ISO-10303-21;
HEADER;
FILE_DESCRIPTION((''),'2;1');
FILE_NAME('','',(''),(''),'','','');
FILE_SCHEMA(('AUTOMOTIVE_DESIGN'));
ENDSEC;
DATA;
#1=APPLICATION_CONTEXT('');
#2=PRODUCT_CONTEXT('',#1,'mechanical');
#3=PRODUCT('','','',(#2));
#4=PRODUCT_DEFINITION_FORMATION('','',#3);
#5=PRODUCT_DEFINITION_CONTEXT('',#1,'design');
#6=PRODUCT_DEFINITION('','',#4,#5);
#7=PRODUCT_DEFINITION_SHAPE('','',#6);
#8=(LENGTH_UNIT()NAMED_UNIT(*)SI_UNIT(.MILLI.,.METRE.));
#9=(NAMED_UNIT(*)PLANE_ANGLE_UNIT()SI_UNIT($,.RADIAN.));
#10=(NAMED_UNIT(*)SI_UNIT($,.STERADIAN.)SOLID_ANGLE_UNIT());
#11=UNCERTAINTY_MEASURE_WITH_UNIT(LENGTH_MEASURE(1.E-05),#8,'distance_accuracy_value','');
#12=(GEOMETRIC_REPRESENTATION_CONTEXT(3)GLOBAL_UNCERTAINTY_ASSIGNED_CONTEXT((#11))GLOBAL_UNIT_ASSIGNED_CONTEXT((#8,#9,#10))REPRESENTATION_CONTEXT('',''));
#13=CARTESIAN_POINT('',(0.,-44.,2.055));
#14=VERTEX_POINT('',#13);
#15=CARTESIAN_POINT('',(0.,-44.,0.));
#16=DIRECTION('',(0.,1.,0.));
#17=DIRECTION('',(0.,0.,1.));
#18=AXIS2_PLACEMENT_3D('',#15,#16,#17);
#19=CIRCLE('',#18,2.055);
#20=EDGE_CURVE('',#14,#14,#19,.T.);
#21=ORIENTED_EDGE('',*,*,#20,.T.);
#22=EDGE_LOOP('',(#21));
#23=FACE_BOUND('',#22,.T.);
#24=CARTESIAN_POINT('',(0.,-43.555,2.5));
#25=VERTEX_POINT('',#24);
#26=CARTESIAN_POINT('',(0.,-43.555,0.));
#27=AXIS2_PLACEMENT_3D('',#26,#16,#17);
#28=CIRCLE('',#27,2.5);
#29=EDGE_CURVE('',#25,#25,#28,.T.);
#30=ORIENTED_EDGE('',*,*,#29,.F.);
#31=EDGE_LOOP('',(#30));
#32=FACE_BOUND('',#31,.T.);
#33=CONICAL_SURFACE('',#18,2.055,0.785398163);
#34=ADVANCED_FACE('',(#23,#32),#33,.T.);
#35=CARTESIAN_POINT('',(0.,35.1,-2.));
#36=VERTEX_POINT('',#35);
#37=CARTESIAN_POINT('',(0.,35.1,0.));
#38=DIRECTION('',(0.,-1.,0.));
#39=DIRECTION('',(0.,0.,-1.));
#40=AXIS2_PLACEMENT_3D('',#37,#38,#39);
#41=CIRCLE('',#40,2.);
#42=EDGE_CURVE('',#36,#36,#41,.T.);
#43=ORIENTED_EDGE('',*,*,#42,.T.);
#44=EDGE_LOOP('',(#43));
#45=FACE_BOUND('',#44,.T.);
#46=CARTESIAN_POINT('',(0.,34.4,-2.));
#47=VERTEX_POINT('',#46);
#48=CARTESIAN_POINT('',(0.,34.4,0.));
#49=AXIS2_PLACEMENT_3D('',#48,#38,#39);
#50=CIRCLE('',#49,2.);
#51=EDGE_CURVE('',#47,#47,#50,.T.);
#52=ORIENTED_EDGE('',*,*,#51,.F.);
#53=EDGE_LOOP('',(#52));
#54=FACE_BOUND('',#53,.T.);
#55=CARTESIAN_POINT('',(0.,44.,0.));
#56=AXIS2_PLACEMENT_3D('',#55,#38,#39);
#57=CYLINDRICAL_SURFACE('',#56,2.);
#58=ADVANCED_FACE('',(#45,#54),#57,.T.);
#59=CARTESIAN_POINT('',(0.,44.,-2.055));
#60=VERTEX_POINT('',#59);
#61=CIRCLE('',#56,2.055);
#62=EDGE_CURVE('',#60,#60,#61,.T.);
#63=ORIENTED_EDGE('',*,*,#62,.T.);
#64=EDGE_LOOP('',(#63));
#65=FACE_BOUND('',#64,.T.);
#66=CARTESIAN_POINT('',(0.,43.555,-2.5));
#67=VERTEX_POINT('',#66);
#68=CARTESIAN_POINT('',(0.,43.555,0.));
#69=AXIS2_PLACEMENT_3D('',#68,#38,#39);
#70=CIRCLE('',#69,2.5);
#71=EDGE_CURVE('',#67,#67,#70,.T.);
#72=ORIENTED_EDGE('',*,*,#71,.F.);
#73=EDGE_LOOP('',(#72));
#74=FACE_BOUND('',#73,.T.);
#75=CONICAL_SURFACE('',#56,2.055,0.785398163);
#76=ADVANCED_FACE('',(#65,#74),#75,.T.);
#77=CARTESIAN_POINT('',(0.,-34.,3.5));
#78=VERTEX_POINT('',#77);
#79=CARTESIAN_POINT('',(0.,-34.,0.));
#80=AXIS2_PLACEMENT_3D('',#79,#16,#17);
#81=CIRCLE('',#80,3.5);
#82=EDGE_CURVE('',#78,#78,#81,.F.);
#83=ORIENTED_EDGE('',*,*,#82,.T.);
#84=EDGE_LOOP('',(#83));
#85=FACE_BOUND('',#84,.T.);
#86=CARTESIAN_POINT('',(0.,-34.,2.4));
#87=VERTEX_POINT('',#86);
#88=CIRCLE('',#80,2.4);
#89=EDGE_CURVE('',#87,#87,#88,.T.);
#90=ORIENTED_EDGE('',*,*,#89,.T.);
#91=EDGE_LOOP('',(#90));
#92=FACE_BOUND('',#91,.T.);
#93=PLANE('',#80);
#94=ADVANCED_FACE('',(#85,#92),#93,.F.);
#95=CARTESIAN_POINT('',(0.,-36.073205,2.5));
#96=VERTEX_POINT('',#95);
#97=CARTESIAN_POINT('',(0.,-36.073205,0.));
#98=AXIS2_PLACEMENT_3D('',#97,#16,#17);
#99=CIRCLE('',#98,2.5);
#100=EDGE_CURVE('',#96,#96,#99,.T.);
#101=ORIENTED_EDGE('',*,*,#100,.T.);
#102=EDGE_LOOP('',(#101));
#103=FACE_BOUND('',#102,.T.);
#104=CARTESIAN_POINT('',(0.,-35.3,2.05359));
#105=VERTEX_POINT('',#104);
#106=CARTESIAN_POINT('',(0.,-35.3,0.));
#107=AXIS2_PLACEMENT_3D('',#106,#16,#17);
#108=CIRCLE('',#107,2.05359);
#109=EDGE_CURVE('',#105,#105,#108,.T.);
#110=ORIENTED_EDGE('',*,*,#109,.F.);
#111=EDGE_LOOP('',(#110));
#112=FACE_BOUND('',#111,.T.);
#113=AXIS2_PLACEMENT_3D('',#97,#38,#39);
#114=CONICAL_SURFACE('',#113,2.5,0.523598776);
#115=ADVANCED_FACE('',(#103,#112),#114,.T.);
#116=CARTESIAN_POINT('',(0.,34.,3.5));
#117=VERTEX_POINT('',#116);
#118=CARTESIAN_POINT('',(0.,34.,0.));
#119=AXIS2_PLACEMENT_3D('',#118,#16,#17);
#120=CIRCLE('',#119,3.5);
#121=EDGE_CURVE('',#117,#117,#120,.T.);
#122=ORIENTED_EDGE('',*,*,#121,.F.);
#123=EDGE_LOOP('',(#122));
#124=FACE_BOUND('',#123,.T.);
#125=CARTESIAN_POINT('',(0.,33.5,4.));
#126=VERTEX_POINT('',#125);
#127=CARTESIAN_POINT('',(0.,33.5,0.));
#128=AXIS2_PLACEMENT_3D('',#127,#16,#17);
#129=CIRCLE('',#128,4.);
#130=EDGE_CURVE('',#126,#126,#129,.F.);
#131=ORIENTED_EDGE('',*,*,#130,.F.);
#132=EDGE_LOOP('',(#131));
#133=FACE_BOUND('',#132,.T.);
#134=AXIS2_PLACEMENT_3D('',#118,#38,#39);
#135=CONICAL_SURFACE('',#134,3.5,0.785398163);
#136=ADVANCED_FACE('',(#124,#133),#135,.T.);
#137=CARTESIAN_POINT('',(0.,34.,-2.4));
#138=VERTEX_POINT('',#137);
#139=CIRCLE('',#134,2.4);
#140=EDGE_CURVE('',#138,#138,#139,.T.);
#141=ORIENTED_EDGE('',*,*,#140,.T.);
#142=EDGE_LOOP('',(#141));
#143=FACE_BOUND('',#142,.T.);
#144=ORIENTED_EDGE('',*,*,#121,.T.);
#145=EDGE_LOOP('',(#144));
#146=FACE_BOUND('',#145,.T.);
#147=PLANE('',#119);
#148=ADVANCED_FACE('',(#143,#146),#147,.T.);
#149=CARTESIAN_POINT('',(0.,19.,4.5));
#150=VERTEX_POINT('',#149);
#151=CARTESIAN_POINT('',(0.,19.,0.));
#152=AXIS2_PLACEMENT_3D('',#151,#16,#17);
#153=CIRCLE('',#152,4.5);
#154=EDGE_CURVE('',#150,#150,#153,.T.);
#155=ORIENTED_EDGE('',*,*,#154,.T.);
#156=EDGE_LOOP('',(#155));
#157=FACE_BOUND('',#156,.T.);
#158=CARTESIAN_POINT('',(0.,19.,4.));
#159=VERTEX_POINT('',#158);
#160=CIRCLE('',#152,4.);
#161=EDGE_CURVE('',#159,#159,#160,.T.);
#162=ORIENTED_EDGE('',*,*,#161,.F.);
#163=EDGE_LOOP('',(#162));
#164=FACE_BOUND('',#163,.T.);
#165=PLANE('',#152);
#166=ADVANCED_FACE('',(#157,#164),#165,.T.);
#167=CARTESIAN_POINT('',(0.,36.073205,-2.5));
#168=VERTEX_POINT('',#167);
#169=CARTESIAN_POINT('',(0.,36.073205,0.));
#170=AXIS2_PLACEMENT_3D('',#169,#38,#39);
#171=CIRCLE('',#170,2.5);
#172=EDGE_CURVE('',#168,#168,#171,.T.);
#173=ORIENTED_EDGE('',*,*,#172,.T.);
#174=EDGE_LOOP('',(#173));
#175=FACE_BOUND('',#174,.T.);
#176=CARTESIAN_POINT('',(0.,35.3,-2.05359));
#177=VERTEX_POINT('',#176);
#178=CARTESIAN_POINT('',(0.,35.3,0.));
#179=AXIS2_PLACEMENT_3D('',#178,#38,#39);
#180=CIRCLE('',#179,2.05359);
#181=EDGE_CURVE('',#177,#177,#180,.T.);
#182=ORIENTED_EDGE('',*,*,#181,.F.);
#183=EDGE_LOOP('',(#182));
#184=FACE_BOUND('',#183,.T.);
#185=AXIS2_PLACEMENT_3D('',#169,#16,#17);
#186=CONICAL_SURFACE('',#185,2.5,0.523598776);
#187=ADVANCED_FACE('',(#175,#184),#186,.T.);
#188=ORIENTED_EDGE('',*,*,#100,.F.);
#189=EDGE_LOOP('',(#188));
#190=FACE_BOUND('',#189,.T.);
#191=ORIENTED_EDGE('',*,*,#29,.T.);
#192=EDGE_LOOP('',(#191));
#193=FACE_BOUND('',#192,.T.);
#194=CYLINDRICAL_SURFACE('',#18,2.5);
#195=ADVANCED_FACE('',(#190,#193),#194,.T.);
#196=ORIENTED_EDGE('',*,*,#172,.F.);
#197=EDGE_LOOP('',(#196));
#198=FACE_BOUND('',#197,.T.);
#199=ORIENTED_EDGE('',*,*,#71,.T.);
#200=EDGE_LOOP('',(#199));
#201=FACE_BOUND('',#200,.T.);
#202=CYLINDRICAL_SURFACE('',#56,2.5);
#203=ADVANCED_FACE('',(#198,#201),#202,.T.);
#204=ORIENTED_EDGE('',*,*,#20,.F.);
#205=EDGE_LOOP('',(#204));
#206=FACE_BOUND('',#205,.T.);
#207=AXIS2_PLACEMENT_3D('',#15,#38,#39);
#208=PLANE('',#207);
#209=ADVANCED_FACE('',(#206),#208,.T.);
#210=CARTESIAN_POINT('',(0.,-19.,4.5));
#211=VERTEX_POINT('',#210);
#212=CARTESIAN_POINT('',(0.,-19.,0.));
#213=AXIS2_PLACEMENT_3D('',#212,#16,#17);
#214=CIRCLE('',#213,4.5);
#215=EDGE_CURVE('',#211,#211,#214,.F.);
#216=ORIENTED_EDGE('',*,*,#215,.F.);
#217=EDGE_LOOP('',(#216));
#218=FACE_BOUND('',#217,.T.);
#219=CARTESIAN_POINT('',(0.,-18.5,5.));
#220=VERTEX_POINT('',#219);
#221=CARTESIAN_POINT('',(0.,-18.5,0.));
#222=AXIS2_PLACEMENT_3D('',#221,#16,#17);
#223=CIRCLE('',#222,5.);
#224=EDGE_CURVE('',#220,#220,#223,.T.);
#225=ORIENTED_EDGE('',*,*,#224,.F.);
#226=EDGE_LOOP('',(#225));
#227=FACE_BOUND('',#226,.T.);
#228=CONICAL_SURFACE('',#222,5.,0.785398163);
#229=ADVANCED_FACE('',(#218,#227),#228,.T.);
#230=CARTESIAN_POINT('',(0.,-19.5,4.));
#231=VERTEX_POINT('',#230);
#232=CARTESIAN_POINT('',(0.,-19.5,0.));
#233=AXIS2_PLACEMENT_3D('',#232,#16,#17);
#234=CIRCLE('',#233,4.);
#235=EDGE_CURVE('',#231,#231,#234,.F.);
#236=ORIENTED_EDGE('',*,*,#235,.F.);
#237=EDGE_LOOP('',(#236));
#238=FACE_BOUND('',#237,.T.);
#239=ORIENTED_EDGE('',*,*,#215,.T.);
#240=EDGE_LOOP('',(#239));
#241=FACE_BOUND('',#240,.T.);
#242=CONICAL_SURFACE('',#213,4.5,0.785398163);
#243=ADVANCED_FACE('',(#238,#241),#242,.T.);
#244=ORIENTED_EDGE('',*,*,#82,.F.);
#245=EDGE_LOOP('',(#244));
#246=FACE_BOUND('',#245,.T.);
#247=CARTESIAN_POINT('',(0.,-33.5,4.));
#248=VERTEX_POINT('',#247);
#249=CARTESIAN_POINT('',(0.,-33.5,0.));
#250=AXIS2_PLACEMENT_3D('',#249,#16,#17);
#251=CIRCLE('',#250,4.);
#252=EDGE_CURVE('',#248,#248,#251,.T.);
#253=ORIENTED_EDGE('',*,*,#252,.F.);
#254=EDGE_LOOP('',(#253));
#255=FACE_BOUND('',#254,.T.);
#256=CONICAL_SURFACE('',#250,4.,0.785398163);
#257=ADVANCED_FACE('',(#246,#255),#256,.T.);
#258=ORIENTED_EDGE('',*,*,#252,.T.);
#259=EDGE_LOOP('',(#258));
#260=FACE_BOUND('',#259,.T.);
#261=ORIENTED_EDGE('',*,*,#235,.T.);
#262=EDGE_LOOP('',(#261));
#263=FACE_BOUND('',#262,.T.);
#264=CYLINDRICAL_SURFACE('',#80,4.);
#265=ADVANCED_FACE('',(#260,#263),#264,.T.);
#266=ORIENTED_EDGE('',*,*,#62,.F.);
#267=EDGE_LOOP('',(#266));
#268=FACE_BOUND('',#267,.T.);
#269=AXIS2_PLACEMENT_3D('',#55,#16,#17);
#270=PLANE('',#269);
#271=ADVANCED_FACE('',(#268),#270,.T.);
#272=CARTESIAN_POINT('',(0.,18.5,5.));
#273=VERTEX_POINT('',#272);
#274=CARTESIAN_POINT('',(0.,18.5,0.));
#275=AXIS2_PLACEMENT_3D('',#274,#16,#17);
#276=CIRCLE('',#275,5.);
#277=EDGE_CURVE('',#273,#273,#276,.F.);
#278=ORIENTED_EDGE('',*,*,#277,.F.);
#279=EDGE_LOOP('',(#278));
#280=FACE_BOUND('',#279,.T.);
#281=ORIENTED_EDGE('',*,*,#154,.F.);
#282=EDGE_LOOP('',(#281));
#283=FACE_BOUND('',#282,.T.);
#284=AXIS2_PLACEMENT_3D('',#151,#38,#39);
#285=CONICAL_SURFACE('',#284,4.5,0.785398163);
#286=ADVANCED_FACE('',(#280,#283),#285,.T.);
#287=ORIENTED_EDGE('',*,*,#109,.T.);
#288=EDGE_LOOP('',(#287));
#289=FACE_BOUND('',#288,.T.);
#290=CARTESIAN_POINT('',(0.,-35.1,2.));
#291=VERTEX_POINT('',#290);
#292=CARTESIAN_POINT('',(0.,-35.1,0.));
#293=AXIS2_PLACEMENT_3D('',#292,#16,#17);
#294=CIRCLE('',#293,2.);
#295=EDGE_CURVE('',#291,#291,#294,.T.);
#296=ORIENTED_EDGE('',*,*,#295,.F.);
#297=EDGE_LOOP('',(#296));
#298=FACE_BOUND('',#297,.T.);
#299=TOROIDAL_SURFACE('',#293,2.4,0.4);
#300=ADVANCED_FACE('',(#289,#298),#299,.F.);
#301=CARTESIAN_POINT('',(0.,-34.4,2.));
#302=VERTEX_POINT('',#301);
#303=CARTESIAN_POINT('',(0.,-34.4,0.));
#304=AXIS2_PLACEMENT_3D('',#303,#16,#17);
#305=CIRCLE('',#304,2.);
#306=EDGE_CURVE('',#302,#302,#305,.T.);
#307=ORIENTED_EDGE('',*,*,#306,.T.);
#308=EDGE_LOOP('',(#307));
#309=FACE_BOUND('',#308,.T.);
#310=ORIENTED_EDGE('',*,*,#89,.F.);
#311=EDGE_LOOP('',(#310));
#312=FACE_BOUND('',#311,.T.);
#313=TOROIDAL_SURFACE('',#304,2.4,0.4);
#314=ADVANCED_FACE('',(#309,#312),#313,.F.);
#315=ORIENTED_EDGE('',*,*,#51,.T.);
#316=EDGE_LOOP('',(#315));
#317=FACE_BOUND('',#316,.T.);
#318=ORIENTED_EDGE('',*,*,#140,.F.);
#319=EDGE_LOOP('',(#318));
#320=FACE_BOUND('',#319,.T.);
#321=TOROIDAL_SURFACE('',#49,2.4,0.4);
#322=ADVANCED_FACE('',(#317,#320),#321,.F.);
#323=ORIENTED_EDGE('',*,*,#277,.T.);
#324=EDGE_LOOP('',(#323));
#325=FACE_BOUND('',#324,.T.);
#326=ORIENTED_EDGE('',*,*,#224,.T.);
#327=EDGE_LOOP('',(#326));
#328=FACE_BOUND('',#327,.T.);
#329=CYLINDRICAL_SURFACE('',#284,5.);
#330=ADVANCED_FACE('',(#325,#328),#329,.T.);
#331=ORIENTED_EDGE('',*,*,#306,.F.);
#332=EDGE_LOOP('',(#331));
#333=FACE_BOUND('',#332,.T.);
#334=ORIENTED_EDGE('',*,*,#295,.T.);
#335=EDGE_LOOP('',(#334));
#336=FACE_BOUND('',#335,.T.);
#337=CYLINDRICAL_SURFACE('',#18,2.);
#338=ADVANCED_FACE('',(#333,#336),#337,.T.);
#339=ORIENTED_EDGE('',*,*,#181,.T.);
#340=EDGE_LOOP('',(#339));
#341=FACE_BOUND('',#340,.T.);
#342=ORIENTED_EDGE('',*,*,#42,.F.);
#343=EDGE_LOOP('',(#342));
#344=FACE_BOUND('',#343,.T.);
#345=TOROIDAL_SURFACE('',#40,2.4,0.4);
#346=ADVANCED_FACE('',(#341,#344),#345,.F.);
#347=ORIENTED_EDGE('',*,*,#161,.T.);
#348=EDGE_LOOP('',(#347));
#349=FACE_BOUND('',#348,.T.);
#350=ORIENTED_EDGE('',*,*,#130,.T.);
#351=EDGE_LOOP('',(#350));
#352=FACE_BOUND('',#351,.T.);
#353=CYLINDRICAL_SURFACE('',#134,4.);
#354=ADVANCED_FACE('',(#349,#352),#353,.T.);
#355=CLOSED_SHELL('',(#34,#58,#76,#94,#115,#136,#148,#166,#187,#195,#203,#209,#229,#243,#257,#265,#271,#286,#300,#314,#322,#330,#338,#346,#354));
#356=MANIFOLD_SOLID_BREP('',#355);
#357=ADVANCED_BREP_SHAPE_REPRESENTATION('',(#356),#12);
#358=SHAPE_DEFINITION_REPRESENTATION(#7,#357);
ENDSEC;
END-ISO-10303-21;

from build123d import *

# Parameters (mm, degrees)
SKETCH1_R           = 5
BOSS_EXTRUDE1_DEPTH = 19
SKETCH2_R           = 4
BOSS_EXTRUDE2_DEPTH = 15
BOSS_EXTRUDE3_START = -53
SKETCH2_2_R         = 4
BOSS_EXTRUDE3_DEPTH = 15
CHAMFER2_SIZE       = 0.5
SKETCH5_R           = 2.6
BOSS_EXTRUDE4_DEPTH = 10
SKETCH7_R           = 2.6
BOSS_EXTRUDE5_DEPTH = 10


# Read off the part's stored shape, not the designer's step: M5 Machine Threads Stud3, M5 Machine Threads Stud4
with BuildPart() as part:
    # Sketch1 → Boss-Extrude1 (new, symmetric)
    with BuildSketch(Plane(origin=(0, 0, 0), x_dir=(1, 0, 0), z_dir=(0, 1, 0))):
        with Locations(Location((0, 0, 0), (0, 0, 270))):
            Circle(SKETCH1_R)
    extrude(amount=BOSS_EXTRUDE1_DEPTH, both=True)

    # Sketch2 → Boss-Extrude2 (add)
    with BuildSketch(Plane(origin=(0, 19, 0), x_dir=(1, 0, 0), z_dir=(0, 1, 0))):
        with Locations(Location((0, 0, 0), (0, 0, 270))):
            Circle(SKETCH2_R)
    extrude(amount=BOSS_EXTRUDE2_DEPTH)

    # Sketch2<2> → Boss-Extrude3 (add)
    with BuildSketch(Plane(origin=(0, 19, 0), x_dir=(1, 0, 0), z_dir=(0, 1, 0)).offset(BOSS_EXTRUDE3_START)):
        with Locations(Location((0, 0, 0), (0, 0, 270))):
            Circle(SKETCH2_2_R)
    extrude(amount=BOSS_EXTRUDE3_DEPTH)

    # Chamfer2
    chamfer2_edges = [part.edges().sort_by_distance(p)[0] for p in [
        (0, -34, -4),
        (0, -19, -4),
        (0, -19, -5),
        (0, 19, -5),
        (0, 34, -4),
    ]]
    chamfer(chamfer2_edges, length=CHAMFER2_SIZE - 0.0001)  # a hair under: the kernel refuses the full size

    # Sketch5 → Boss-Extrude4 (add)
    with BuildSketch(Plane.XZ.offset(34)):
        with Locations(Location((0, 0, 0), (0, 0, 270))):
            Circle(SKETCH5_R)
    extrude(amount=BOSS_EXTRUDE4_DEPTH)

    # M5 Machine Threads Stud3 outline → M5 Machine Threads Stud3 (revolve, cut)
    with BuildSketch(Plane.XY):
        with BuildLine():
            Line((2.6, -44), (2.6, -34))
            Line((2.6, -34), (2.4, -34))
            ThreePointArc((2.4, -34), (2.117157288, -34.117157288), (2, -34.4))
            Line((2, -34.4), (2, -35.1))
            ThreePointArc((2, -35.1), (2.013629669, -35.203527618), (2.053589838, -35.3))
            Line((2.053589838, -35.3), (2.5, -36.073205081))
            Line((2.5, -36.073205081), (2.5, -43.555))
            Line((2.5, -43.555), (2.055, -44))
            Line((2.055, -44), (2.6, -44))
        make_face()
    revolve(axis=Axis((0, 0, 0), (0, 1, 0)), mode=Mode.SUBTRACT)

    # Sketch7 → Boss-Extrude5 (add)
    with BuildSketch(Plane(origin=(0, 34, 0), x_dir=(1, 0, 0), z_dir=(0, 1, 0))):
        with Locations(Location((0, 0, 0), (0, 0, 270))):
            Circle(SKETCH7_R)
    extrude(amount=BOSS_EXTRUDE5_DEPTH)

    # M5 Machine Threads Stud4 outline → M5 Machine Threads Stud4 (revolve, cut)
    with BuildSketch(Plane.XY):
        with BuildLine():
            Line((2.6, 44), (2.055, 44))
            Line((2.055, 44), (2.5, 43.555))
            Line((2.5, 43.555), (2.5, 36.073205081))
            Line((2.5, 36.073205081), (2.053589838, 35.3))
            ThreePointArc((2.053589838, 35.3), (2.013629669, 35.203527618), (2, 35.1))
            Line((2, 35.1), (2, 34.4))
            ThreePointArc((2, 34.4), (2.117157288, 34.117157288), (2.4, 34))
            Line((2.4, 34), (2.6, 34))
            Line((2.6, 34), (2.6, 44))
        make_face()
    revolve(axis=Axis((0, 0, 0), (0, 1, 0)), mode=Mode.SUBTRACT)


solid = part.part
